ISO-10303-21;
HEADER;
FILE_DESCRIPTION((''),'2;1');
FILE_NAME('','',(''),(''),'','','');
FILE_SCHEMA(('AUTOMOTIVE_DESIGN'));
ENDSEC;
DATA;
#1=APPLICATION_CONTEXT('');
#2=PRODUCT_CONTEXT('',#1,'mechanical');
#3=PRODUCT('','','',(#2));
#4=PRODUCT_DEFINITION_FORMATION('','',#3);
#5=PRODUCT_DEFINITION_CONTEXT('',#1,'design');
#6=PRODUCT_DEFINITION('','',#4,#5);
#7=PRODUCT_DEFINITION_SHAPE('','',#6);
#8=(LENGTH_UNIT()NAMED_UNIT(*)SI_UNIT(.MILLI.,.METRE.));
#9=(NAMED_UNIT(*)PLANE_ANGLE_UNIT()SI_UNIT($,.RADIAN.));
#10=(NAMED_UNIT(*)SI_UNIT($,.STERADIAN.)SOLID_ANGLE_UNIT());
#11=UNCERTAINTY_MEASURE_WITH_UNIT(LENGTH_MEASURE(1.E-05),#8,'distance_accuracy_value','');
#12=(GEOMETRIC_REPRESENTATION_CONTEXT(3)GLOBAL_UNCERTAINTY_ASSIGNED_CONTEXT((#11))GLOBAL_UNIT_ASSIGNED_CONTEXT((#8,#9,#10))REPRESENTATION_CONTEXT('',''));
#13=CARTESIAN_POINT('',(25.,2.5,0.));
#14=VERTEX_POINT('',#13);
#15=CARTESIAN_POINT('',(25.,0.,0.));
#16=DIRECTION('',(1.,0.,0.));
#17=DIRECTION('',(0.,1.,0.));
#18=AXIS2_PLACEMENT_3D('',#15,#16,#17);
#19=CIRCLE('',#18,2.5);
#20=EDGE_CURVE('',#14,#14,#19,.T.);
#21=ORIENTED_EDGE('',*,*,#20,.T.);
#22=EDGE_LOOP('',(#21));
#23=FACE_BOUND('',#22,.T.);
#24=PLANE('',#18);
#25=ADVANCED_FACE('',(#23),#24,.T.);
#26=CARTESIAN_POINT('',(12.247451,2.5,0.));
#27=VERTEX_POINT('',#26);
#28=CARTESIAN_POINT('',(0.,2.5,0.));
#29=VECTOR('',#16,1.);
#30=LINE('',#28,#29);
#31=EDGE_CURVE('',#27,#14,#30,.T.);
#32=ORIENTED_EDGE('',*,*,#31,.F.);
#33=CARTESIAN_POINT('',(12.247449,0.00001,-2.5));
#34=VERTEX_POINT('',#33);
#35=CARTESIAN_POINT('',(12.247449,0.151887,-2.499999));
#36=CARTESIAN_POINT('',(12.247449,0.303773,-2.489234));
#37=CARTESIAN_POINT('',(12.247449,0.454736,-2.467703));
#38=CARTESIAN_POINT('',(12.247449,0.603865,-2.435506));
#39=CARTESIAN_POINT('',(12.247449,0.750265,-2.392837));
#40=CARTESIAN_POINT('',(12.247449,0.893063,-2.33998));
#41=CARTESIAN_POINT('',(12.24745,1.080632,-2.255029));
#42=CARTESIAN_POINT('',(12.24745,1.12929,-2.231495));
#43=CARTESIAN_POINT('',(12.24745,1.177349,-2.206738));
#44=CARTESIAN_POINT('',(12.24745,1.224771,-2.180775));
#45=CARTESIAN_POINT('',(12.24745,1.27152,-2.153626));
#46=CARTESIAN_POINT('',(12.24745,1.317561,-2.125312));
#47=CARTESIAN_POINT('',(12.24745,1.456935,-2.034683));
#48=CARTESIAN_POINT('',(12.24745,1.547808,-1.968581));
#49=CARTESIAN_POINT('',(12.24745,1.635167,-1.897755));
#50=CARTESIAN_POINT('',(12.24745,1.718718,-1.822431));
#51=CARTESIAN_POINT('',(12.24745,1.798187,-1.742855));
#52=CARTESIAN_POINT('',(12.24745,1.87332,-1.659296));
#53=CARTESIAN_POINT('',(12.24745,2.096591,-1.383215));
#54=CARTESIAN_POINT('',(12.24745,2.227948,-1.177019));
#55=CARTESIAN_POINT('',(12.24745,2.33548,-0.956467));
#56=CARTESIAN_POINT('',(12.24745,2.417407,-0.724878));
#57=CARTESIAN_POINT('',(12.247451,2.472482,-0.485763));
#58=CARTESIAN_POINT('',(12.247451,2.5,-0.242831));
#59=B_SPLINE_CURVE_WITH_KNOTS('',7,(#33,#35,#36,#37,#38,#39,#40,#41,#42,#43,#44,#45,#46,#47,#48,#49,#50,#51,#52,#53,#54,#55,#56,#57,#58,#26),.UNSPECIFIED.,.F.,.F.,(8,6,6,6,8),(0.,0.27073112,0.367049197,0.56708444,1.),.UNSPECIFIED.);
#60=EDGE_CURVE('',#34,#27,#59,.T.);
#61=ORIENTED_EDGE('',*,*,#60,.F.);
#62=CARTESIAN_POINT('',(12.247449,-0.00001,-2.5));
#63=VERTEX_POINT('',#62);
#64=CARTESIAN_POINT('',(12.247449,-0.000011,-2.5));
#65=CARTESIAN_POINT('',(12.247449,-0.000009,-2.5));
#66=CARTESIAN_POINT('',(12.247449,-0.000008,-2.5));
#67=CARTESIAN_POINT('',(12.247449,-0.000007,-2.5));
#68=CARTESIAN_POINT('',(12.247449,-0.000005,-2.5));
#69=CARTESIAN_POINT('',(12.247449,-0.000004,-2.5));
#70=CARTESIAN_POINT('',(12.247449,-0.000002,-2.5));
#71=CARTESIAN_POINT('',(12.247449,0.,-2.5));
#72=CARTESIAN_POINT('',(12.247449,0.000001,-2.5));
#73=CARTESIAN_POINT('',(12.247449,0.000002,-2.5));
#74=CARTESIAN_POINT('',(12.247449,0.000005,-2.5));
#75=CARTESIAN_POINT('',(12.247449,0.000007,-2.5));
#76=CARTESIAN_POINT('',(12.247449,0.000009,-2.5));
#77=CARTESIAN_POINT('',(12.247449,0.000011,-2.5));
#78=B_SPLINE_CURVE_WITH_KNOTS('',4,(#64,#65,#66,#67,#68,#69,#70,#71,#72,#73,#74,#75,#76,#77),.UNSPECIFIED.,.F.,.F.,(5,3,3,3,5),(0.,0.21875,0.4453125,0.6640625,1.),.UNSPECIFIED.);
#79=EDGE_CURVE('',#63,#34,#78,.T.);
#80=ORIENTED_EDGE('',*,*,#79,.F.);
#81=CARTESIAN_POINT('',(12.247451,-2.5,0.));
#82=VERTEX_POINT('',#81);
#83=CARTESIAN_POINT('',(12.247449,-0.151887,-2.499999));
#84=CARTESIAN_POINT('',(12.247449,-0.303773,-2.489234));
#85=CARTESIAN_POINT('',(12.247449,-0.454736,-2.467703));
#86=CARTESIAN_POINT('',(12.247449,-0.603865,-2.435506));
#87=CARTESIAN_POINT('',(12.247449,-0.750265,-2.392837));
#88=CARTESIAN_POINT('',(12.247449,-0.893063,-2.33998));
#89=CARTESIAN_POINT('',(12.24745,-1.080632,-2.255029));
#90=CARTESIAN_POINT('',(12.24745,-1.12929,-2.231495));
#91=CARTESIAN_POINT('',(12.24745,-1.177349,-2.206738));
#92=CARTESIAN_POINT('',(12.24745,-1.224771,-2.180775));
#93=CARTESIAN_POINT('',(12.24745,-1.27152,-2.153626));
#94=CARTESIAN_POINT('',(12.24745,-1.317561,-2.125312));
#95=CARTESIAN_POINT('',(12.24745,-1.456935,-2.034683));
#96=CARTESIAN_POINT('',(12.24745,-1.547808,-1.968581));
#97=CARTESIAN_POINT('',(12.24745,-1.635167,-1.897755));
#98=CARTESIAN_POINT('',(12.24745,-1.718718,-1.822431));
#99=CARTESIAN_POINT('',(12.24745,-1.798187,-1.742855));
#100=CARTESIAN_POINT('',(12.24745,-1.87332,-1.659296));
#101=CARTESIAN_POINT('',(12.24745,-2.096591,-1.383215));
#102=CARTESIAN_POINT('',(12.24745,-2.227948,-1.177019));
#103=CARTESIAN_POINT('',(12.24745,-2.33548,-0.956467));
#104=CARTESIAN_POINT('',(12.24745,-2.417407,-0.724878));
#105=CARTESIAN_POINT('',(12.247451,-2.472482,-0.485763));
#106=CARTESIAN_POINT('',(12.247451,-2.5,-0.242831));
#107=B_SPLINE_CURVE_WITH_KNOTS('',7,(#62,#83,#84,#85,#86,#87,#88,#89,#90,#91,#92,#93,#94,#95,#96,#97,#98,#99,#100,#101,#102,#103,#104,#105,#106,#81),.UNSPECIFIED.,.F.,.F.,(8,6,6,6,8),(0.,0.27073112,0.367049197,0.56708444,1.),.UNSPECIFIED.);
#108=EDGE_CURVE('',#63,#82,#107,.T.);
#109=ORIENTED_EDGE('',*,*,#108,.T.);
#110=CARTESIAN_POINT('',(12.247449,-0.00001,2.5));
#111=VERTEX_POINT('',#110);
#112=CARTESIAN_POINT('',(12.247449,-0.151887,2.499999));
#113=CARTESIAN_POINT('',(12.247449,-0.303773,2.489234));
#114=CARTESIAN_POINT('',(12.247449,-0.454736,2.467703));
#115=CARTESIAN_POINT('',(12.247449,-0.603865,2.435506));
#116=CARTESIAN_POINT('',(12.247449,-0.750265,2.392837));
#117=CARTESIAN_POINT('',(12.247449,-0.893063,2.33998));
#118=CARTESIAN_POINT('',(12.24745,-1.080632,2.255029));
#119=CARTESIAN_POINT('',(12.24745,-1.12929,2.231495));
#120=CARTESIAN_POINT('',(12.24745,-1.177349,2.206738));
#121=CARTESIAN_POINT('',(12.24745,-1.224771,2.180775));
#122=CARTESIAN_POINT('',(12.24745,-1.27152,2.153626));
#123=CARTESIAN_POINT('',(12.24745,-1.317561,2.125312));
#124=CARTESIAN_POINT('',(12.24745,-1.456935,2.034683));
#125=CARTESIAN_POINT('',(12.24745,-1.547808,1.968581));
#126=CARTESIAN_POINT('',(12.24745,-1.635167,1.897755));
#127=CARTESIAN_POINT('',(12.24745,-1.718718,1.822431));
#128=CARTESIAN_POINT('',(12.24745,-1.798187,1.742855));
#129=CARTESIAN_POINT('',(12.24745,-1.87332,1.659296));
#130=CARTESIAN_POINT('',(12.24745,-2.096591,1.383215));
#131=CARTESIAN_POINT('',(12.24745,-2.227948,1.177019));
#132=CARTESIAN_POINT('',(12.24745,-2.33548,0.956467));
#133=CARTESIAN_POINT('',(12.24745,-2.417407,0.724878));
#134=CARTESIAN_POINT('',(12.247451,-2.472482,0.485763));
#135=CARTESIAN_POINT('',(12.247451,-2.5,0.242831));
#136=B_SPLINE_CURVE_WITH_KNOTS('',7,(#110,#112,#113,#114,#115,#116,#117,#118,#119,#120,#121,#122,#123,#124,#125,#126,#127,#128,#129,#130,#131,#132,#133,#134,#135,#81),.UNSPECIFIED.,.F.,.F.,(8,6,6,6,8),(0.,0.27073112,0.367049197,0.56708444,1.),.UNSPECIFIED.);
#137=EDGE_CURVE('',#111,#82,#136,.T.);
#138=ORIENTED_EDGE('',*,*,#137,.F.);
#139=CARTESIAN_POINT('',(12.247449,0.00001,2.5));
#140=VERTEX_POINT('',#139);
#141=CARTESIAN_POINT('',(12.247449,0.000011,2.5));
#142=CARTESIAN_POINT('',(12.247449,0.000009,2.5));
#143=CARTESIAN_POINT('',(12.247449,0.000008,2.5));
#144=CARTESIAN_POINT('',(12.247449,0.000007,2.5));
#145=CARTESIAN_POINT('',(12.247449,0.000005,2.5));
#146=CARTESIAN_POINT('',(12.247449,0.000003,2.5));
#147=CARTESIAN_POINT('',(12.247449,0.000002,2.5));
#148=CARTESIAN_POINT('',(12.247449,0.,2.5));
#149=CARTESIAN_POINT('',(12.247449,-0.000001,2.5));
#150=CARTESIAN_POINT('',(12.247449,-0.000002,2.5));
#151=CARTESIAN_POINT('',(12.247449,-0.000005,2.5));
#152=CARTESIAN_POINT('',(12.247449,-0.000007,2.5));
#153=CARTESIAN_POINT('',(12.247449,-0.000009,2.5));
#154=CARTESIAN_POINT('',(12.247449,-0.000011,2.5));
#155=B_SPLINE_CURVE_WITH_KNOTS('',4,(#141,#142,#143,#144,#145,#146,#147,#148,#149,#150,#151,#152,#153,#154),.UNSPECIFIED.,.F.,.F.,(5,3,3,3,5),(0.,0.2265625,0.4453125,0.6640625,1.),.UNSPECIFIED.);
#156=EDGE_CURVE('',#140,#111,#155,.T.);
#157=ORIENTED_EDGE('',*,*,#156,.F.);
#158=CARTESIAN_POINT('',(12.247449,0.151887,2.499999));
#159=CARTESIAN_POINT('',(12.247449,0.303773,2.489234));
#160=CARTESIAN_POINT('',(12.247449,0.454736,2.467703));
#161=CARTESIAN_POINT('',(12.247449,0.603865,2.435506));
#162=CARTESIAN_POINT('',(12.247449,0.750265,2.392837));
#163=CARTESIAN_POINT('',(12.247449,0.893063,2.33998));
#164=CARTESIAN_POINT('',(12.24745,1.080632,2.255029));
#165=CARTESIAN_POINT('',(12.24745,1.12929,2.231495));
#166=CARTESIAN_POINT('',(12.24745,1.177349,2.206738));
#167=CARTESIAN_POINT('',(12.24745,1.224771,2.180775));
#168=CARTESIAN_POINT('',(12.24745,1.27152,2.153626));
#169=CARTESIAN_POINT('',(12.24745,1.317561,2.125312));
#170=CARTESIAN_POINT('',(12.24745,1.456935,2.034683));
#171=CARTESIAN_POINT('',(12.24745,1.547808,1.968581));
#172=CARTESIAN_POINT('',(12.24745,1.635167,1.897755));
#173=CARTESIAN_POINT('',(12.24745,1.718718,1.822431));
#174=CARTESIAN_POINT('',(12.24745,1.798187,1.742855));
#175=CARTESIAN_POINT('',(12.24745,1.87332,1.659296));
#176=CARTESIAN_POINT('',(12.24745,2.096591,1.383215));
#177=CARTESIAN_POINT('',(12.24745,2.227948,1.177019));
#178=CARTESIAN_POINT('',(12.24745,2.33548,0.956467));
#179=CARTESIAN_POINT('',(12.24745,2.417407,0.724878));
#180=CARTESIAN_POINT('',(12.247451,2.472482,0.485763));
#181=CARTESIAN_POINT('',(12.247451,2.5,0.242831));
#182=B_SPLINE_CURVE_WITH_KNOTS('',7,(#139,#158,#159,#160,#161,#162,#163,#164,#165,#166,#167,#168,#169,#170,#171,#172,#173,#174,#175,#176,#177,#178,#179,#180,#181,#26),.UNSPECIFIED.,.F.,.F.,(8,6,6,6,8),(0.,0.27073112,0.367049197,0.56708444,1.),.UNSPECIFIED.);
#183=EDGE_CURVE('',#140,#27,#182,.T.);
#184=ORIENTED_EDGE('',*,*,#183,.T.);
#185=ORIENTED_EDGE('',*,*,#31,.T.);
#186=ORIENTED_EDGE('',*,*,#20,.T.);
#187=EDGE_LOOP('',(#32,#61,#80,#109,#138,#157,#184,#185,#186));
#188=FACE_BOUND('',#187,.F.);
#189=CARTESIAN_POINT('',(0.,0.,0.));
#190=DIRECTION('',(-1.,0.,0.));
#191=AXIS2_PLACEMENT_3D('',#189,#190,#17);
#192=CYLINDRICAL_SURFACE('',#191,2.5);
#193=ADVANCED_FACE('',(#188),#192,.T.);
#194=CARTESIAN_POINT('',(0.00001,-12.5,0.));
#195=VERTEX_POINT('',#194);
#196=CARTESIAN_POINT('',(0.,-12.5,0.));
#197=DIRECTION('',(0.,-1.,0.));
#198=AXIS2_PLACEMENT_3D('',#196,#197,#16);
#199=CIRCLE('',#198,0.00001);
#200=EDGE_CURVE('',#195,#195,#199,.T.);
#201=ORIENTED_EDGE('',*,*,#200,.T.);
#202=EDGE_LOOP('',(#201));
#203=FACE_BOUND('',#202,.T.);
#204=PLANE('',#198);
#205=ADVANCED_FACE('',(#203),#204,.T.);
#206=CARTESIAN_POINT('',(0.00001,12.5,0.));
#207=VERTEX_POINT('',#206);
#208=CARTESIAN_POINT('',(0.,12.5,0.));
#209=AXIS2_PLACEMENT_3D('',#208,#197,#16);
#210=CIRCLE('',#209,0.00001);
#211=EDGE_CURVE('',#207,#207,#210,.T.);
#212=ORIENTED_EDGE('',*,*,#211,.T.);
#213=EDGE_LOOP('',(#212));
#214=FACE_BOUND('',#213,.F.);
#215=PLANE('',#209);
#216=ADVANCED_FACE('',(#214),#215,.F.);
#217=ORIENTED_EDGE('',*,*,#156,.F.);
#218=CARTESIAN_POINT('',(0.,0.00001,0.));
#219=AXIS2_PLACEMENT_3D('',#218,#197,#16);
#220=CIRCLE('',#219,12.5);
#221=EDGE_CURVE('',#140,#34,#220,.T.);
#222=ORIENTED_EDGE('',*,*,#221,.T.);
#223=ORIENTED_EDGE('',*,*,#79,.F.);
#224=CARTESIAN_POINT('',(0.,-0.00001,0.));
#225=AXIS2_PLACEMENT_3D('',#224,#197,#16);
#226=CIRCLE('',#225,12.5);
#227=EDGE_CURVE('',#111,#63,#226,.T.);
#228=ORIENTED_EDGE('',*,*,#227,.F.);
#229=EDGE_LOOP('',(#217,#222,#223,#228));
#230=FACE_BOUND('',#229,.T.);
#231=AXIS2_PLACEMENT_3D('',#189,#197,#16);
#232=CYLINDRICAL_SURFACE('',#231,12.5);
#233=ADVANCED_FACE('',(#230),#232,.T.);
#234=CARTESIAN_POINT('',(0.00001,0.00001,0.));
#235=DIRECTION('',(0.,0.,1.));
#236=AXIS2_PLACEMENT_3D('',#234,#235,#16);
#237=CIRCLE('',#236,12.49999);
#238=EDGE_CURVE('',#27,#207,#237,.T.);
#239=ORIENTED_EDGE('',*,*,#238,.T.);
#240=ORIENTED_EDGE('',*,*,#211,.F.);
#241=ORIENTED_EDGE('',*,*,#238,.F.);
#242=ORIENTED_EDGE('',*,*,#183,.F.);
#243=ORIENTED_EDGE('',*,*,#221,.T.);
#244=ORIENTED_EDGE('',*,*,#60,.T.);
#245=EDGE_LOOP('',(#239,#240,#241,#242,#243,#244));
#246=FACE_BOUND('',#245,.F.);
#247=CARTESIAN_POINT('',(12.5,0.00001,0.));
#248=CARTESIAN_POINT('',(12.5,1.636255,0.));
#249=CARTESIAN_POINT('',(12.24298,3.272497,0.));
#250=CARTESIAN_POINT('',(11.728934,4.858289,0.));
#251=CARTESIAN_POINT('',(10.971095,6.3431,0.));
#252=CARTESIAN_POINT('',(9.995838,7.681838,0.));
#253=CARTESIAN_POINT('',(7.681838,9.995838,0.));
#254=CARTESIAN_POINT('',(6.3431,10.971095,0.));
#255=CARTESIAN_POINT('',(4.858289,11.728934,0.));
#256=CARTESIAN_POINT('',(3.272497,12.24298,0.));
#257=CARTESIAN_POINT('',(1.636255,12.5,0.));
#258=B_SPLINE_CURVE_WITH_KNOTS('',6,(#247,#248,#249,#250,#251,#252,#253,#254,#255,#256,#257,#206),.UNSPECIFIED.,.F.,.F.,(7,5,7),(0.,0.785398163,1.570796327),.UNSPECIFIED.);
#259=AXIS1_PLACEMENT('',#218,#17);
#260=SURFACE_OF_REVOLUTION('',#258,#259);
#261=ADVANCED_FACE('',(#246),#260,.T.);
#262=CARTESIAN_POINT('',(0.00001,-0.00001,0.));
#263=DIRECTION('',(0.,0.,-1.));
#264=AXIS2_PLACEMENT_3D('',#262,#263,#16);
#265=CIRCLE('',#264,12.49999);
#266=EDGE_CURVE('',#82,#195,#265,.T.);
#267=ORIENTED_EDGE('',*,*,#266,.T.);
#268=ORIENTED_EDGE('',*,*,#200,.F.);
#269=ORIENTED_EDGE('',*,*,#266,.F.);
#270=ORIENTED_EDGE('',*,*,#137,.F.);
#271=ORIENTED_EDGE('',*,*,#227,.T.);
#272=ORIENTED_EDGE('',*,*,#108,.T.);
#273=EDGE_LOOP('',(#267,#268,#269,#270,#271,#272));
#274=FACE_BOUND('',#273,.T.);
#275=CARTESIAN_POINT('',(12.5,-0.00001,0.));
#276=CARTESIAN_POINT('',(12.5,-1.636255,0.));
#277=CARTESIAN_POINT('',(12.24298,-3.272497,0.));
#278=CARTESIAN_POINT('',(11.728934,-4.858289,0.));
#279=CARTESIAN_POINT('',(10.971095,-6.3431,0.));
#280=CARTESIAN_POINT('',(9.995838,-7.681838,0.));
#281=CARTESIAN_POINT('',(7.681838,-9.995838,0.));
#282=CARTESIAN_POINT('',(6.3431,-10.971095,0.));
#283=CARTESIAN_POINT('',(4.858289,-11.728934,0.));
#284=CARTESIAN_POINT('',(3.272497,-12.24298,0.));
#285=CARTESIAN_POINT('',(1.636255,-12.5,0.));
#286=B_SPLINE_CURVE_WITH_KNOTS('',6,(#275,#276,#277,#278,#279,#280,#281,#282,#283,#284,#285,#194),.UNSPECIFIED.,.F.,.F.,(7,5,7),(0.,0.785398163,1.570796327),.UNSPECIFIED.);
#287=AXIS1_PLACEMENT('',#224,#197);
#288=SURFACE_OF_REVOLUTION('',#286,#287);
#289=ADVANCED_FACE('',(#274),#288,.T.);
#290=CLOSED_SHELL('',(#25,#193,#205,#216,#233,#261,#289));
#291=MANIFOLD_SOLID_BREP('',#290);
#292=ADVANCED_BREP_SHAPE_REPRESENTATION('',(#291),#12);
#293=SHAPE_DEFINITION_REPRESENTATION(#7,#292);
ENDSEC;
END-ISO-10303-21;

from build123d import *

# Parameters (mm, degrees)
F0_R     = 12.5
F1_DEPTH = 12.5
F2_R     = 12.49999
F3_R     = 2.5
F4_DEPTH = 25


# Not quite as in the source:
# - a fillet or chamfer is up to 0.001 mm smaller than in the source, because OpenCascade refuses the exact size


with BuildPart() as f1:
    # F0 (on Front) → F1 (new body, symmetric)
    with BuildSketch(Plane.XZ):
        Circle(F0_R)
    extrude(amount=F1_DEPTH, both=True)

    # F2 (radius 12.5 in the source; OpenCascade refuses exactly that, so slightly less here)
    f2_edges = [f1.edges().sort_by_distance(p)[0] for p in [
        (-12.5, -12.5, 0),
        (-12.5, 12.5, 0),
    ]]
    fillet(f2_edges, radius=F2_R)

    # F3 (on Right) → F4 (join)
    with BuildSketch(Plane.YZ):
        Circle(F3_R)
    extrude(amount=F4_DEPTH)


solid = f1.part
